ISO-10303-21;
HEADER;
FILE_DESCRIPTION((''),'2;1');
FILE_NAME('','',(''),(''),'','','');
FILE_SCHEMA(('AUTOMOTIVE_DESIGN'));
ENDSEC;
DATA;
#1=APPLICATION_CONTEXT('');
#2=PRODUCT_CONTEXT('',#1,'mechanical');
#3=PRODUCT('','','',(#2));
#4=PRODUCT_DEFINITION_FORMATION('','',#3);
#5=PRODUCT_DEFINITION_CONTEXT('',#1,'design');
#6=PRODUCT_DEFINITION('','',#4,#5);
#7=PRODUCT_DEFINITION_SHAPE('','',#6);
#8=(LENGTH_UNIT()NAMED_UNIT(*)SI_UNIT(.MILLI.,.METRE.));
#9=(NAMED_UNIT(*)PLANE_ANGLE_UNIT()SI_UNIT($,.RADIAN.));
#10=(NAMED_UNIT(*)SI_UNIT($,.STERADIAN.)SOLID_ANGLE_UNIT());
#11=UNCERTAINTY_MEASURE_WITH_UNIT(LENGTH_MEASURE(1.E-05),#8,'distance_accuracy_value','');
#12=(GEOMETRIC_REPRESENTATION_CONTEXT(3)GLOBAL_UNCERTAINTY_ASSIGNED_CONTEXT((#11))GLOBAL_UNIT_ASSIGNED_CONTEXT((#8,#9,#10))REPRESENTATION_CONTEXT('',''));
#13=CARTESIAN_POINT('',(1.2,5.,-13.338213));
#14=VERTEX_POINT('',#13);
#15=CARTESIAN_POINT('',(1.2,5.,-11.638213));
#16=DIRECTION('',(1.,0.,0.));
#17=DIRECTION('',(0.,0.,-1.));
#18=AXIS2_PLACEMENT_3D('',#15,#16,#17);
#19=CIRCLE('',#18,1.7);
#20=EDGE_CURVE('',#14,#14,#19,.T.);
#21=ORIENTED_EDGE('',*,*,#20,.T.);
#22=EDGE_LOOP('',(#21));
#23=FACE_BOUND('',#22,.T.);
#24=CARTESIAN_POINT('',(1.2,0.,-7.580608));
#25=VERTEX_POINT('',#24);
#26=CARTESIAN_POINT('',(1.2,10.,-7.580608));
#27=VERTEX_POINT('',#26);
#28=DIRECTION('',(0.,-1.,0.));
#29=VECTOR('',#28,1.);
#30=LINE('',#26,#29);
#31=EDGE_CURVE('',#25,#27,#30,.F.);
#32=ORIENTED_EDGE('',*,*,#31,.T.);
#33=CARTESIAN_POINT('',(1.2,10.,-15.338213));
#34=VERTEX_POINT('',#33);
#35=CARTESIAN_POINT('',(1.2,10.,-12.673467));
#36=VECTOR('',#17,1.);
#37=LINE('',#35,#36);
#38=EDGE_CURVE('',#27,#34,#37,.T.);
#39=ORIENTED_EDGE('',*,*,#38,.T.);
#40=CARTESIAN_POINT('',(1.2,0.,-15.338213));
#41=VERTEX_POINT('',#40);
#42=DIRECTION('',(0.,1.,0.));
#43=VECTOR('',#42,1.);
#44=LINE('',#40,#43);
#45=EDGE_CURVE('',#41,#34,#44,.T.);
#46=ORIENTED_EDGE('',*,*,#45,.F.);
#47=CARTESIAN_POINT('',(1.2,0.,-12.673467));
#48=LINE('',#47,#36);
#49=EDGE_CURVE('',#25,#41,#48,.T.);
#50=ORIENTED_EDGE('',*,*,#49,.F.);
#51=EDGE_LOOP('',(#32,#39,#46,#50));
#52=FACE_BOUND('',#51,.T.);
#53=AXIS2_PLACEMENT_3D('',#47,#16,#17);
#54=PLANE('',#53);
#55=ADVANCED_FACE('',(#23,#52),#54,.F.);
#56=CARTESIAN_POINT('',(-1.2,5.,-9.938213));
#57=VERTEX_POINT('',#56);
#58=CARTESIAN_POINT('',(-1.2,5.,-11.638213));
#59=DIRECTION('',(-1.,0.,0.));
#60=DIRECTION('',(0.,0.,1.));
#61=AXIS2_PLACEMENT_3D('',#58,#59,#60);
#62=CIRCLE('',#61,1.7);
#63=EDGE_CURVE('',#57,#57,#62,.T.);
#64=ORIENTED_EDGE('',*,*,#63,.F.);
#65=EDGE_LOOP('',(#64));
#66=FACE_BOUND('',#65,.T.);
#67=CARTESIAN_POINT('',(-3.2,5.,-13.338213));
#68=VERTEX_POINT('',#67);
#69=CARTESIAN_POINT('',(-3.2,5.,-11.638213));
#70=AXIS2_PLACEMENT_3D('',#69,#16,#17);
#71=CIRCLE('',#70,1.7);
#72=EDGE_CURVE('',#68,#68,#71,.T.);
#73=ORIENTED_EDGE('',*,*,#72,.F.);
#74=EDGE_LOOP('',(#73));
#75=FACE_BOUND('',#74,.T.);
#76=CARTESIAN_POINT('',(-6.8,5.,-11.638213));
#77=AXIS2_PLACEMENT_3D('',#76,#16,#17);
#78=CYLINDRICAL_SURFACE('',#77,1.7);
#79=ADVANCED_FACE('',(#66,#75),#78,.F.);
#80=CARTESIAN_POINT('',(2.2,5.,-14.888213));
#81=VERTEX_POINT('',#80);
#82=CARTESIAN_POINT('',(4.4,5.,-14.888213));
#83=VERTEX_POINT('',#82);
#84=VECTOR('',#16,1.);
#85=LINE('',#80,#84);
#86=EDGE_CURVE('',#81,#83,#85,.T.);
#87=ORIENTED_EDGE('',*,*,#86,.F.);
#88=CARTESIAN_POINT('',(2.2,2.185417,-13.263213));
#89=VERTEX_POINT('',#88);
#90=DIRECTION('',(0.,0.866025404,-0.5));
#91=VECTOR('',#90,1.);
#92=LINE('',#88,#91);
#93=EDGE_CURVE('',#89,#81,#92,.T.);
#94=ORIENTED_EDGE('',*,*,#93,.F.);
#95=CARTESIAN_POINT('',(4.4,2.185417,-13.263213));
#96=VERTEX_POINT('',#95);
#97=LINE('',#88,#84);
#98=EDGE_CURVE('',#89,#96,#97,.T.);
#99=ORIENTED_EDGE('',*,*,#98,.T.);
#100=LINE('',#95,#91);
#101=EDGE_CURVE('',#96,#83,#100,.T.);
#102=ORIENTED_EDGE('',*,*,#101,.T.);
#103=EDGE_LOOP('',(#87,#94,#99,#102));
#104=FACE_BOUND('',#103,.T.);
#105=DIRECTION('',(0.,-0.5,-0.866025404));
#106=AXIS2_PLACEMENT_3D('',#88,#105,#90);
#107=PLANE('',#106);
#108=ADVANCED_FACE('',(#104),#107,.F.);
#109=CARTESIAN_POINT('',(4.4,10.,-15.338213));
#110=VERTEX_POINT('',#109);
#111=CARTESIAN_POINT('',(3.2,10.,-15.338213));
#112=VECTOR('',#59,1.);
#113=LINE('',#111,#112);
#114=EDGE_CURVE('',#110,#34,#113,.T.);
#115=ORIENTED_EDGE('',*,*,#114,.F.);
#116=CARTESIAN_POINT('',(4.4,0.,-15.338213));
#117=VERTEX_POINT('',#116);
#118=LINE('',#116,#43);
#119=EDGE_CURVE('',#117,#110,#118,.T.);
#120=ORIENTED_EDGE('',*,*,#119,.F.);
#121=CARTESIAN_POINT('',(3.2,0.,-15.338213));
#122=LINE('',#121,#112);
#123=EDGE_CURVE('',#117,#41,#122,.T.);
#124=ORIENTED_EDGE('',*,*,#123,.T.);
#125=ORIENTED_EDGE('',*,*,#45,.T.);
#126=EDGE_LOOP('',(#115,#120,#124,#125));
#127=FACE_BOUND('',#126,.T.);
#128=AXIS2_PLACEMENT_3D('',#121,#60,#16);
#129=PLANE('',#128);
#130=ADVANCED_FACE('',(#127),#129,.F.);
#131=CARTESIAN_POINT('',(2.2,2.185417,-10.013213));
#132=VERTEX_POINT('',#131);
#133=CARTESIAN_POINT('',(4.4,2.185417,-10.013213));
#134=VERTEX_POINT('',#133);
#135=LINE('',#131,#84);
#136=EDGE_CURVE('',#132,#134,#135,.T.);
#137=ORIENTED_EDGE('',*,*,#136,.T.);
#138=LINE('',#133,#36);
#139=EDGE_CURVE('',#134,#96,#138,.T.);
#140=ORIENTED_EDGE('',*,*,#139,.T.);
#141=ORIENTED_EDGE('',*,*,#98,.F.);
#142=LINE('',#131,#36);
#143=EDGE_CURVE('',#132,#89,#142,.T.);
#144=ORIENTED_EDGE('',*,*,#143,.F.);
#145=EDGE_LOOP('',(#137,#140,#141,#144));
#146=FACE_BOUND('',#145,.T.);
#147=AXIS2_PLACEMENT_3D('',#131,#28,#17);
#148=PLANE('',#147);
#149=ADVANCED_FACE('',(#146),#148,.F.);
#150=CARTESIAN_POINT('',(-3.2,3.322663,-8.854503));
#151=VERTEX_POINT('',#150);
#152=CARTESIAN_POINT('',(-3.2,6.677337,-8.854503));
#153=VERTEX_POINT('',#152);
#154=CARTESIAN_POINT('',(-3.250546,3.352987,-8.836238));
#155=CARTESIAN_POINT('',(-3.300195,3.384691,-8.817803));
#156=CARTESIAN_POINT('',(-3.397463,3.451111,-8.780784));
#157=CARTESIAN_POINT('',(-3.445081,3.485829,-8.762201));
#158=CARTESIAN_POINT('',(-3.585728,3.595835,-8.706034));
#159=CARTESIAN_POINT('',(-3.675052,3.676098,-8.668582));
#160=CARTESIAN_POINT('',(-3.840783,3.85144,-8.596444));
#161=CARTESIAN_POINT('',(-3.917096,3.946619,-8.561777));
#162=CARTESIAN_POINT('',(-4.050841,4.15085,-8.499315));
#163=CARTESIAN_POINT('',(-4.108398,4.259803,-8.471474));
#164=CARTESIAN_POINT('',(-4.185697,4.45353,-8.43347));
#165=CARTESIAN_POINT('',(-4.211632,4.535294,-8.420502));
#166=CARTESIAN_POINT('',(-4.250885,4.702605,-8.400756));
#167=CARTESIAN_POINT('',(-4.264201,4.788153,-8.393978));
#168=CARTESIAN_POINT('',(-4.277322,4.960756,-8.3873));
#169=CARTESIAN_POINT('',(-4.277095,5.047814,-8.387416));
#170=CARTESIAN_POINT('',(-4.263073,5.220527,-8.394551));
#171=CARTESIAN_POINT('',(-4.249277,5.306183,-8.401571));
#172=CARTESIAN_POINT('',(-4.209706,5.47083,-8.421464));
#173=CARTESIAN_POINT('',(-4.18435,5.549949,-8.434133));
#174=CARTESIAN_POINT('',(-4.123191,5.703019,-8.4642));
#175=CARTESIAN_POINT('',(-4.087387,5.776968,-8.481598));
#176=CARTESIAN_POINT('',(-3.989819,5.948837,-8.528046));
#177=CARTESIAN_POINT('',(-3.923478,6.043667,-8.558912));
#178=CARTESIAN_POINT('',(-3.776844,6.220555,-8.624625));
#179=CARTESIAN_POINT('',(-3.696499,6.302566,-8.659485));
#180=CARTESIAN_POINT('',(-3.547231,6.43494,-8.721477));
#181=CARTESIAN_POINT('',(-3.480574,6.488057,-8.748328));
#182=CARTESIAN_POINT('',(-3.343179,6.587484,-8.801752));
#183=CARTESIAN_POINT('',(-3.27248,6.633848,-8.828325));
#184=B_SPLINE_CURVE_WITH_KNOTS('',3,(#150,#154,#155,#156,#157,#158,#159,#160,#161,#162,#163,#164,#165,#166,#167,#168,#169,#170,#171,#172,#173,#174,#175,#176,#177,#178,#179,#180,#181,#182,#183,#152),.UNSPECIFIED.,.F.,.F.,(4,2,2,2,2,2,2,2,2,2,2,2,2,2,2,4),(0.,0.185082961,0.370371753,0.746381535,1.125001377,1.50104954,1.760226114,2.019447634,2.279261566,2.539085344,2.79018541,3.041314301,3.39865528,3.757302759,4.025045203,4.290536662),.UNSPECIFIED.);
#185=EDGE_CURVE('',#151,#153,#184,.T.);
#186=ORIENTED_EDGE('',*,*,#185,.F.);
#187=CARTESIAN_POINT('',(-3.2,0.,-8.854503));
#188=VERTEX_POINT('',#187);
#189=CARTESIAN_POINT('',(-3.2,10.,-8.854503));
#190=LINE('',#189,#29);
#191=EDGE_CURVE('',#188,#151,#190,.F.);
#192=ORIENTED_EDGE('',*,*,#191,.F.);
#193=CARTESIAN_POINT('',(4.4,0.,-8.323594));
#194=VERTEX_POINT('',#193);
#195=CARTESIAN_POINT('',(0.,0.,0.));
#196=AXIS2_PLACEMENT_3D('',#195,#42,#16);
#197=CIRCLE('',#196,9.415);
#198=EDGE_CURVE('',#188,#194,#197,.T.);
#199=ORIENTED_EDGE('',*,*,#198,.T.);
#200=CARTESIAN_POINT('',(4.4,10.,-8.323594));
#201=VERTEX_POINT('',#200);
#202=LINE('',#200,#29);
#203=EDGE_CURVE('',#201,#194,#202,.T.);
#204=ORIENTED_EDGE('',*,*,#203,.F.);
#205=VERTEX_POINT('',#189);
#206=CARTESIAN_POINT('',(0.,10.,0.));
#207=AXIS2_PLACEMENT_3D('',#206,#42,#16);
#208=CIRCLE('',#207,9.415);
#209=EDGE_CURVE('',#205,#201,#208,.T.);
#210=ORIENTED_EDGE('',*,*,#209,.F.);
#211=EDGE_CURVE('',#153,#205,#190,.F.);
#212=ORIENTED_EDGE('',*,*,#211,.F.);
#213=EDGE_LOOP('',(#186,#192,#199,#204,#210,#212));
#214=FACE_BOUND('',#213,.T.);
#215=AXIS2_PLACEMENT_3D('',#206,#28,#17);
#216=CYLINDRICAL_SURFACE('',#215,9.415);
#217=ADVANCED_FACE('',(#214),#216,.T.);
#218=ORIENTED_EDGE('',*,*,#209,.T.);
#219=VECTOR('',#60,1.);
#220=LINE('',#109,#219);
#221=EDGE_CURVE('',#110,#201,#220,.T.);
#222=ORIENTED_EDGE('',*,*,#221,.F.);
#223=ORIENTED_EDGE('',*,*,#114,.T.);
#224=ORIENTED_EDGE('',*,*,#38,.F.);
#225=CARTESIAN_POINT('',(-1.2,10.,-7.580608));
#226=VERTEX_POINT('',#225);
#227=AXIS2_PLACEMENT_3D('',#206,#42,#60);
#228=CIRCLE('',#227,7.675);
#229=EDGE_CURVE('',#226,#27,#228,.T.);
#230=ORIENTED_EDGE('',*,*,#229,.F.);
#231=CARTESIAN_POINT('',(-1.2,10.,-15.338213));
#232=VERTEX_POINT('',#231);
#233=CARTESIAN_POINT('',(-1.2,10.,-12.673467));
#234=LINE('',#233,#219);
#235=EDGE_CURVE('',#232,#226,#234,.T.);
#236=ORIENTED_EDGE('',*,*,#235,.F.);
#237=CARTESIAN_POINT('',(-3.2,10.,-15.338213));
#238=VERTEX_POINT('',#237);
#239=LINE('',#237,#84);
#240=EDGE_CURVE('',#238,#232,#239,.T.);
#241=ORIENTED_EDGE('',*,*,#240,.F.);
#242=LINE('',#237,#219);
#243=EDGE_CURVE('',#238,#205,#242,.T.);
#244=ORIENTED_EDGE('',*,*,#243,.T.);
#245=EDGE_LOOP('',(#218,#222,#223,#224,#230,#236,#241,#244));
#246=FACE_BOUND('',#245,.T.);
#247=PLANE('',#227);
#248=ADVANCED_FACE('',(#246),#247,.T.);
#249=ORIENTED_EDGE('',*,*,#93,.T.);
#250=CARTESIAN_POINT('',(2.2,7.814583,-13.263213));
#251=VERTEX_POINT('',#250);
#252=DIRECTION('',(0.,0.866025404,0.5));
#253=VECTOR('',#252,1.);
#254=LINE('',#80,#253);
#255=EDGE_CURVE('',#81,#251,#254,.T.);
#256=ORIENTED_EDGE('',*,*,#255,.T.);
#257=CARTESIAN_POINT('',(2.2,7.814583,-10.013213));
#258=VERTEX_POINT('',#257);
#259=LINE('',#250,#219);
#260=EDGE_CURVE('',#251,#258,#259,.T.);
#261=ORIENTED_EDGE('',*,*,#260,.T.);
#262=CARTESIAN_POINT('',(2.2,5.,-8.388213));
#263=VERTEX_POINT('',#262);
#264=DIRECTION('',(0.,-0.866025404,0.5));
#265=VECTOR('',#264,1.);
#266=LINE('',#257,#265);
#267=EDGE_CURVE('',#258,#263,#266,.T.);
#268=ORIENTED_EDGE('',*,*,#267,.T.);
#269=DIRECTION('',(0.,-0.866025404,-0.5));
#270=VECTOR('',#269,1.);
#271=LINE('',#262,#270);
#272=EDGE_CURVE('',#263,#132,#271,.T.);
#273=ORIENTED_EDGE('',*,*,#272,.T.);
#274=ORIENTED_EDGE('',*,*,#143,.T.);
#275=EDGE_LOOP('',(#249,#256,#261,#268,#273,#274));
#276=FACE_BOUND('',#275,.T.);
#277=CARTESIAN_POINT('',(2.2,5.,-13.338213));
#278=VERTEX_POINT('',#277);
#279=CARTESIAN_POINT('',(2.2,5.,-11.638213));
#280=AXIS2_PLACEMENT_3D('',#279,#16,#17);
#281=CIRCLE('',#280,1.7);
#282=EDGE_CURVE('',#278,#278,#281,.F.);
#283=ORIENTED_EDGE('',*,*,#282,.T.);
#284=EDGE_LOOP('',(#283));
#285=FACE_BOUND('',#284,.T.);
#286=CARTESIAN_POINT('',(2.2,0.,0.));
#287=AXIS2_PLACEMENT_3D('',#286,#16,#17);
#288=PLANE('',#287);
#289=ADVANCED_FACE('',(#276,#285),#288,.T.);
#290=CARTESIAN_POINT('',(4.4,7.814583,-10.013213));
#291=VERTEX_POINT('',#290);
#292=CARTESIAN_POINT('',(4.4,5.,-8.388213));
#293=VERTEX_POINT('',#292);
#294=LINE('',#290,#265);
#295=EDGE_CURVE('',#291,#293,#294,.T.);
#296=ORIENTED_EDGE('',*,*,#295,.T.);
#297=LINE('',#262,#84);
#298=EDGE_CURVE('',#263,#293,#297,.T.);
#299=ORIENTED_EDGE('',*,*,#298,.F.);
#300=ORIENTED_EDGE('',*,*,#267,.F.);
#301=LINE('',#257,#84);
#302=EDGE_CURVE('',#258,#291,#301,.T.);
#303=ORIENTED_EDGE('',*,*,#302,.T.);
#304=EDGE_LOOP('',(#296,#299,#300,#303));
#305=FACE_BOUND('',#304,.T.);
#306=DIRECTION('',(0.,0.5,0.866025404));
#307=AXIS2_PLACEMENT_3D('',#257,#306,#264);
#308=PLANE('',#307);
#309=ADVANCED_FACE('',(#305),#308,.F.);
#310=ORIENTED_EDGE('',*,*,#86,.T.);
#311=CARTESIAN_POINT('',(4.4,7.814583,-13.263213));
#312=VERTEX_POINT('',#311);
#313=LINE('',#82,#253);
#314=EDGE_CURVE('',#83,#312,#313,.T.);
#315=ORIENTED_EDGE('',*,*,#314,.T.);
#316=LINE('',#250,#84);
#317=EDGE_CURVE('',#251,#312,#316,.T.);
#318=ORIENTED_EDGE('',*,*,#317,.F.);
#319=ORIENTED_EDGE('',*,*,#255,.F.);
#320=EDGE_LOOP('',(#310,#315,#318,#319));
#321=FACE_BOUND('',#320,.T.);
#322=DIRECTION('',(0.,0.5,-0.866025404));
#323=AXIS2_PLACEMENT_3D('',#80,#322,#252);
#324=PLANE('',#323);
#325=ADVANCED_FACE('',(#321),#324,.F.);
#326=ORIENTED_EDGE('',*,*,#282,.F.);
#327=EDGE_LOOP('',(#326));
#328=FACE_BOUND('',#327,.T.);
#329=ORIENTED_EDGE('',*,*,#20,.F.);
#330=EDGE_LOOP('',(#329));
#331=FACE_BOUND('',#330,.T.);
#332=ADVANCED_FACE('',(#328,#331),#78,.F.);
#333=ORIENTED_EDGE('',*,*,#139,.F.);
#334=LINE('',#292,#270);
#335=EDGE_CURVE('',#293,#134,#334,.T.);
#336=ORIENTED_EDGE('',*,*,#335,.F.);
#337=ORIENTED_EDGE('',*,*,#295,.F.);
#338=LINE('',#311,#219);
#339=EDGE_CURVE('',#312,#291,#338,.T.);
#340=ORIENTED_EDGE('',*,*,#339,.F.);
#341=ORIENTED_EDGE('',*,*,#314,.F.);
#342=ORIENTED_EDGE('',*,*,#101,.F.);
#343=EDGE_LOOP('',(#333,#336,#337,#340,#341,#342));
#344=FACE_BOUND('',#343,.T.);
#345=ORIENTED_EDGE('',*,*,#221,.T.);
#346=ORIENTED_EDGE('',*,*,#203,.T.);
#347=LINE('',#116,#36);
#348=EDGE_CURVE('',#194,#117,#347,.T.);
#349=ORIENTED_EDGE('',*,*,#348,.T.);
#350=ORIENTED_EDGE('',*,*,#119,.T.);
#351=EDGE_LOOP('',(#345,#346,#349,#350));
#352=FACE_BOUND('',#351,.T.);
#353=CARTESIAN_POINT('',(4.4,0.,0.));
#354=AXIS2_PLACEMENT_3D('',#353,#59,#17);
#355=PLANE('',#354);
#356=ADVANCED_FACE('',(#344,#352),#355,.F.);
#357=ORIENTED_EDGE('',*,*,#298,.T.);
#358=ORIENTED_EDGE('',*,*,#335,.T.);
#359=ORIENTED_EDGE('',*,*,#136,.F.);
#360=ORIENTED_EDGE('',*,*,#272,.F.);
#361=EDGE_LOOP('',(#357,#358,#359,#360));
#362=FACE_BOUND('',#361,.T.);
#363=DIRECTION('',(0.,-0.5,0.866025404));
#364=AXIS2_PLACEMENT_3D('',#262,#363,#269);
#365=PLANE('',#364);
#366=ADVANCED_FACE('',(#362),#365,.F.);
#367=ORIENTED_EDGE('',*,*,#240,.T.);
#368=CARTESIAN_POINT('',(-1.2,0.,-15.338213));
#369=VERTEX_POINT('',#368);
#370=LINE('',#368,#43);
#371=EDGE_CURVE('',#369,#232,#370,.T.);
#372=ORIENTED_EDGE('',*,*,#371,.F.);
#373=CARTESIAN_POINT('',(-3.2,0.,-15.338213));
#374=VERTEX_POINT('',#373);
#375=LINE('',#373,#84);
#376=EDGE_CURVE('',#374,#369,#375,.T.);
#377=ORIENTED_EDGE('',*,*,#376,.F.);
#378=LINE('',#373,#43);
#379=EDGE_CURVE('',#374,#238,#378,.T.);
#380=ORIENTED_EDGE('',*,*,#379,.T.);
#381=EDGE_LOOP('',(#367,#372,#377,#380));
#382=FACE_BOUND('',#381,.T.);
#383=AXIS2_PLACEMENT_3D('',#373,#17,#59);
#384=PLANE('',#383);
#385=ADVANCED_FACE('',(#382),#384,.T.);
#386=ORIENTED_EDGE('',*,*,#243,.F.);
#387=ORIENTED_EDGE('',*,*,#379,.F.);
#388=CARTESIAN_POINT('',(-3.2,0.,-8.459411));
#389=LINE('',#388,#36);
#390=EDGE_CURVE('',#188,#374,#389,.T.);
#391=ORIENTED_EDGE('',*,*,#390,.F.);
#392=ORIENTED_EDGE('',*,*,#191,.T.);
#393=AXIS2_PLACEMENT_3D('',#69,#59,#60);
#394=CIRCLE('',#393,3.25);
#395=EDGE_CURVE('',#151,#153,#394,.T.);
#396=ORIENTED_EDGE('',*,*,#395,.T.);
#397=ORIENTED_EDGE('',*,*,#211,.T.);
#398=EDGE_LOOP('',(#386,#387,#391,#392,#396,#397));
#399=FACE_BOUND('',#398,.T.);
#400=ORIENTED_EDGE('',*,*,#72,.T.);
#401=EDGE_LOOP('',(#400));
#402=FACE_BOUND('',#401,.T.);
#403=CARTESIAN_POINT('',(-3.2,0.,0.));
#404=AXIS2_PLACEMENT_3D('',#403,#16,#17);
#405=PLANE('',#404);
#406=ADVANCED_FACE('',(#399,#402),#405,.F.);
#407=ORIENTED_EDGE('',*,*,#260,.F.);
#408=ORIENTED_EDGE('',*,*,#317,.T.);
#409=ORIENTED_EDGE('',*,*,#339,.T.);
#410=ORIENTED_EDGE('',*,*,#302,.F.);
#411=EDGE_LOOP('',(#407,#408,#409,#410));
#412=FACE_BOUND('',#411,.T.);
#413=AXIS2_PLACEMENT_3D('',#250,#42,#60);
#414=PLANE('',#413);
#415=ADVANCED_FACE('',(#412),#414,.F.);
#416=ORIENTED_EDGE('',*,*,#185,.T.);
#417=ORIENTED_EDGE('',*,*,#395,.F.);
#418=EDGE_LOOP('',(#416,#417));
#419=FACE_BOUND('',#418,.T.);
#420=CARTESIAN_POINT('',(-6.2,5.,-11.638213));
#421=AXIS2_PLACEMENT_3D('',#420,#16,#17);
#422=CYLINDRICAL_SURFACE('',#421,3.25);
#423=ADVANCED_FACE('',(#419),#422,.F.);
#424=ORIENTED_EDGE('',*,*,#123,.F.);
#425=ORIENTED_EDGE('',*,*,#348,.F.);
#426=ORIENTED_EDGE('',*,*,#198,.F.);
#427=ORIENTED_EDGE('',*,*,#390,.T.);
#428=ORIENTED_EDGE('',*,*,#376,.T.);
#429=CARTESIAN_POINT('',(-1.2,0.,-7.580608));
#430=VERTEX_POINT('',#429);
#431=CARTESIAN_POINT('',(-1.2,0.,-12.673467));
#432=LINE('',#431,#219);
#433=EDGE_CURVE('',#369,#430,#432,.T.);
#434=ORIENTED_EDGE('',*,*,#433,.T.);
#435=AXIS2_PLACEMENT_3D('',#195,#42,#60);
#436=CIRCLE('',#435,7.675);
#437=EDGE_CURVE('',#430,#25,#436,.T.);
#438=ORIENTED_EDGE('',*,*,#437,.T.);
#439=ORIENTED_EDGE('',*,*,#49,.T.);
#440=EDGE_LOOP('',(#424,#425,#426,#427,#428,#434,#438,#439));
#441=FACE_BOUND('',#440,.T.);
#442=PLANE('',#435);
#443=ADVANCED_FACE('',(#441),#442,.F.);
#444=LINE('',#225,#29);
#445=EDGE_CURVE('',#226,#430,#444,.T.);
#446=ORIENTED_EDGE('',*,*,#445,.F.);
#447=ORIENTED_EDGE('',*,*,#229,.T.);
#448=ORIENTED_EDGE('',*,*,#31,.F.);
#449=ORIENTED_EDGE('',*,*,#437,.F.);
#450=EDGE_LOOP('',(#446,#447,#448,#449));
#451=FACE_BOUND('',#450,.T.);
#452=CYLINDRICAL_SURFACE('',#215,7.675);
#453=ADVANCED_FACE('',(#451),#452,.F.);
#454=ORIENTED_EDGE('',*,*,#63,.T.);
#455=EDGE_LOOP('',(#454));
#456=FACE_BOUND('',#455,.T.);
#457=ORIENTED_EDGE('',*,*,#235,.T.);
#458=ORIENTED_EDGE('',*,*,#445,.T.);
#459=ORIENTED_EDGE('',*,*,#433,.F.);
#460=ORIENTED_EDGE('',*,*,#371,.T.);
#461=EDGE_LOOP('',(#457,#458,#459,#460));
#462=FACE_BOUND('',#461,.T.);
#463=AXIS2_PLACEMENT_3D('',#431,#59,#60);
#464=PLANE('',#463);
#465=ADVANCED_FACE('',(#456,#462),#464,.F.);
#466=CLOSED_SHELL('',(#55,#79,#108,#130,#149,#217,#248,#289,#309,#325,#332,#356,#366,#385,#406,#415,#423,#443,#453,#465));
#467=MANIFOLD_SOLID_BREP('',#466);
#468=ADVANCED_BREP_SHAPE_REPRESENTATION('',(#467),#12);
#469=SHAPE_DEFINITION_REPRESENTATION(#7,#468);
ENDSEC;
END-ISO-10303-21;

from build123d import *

# Parameters (mm, degrees)
SKETCH1_R            = 9.415
SKETCH1_R_2          = 7.675
EXTRUDE_THIN1_DEPTH  = 10
SKETCH2_W            = 2.4
SKETCH2_H            = 11.262029822
CUT_EXTRUDE1_DEPTH   = 10
BOSS_EXTRUDE1_DEPTH  = 2
SKETCH5_R            = 1.7
CUT_EXTRUDE2_DEPTH   = 10
MOVE_START           = 3.2
MOVE_FACE1_OUTLINE_W = 10
MOVE_FACE1_OUTLINE_H = 8.338213159
MOVE_FACE1_OUTLINE_R = 1.7
MOVE_FACE1_DEPTH     = 1.2
CUT_EXTRUDE3_DEPTH   = 2.2
SKETCH8_R            = 3.25
CUT_EXTRUDE4_DEPTH   = 3


# Read off the part's stored shape, not the designer's step: Move Face1
with BuildPart() as part:
    # Sketch1 → Extrude-Thin1 (new body)
    with BuildSketch(Plane(origin=(0, 0, 0), x_dir=(1, 0, 0), z_dir=(0, 1, 0))):
        Circle(SKETCH1_R)
        Circle(SKETCH1_R_2, mode=Mode.SUBTRACT)
    extrude(amount=EXTRUDE_THIN1_DEPTH)

    # Sketch2 → Cut-Extrude1 (cut)
    with BuildSketch(Plane(origin=(0, 10, 0), x_dir=(1, 0, 0), z_dir=(0, 1, 0))):
        with Locations((0, 7.042452335)):
            Rectangle(SKETCH2_W, SKETCH2_H)
    extrude(amount=-CUT_EXTRUDE1_DEPTH, mode=Mode.SUBTRACT)

    # Sketch4 → Boss-Extrude1 (add)
    with BuildSketch(Plane(origin=(-1.2, 0, 0), x_dir=(0, 0, -1), z_dir=(1, 0, 0))):
        Polygon((9.338213159, 10), (8.459410822, 10), (8.459410822, 0), (9.338213159, 0), (15.338213159, 0), (15.338213159, 10), align=None)
    boss_extrude1 = extrude(amount=-BOSS_EXTRUDE1_DEPTH)

    # Mirror1: Boss-Extrude1 across plane
    add(boss_extrude1.mirror(Plane(origin=(0, 0, 0), x_dir=(0, 0, 1), z_dir=(1, 0, 0))))

    # Sketch5 → Cut-Extrude2 (cut)
    with BuildSketch(Plane(origin=(3.2, 0, 0), x_dir=(0, 0, -1), z_dir=(1, 0, 0))):
        with Locations((11.638213159, 5)):
            Circle(SKETCH5_R)
    extrude(amount=-CUT_EXTRUDE2_DEPTH, mode=Mode.SUBTRACT)

    # Move Face1 outline → Move Face1 (add)
    with BuildSketch(Plane.YZ.offset(MOVE_START)):
        with Locations((5, -11.169106579)):
            Rectangle(MOVE_FACE1_OUTLINE_W, MOVE_FACE1_OUTLINE_H)
        with Locations((5, -11.638213159)):
            Circle(MOVE_FACE1_OUTLINE_R, mode=Mode.SUBTRACT)
    extrude(amount=MOVE_FACE1_DEPTH)

    # Sketch7 → Cut-Extrude3 (cut)
    with BuildSketch(Plane(origin=(4.4, 0, 0), x_dir=(0, 0, -1), z_dir=(1, 0, 0))):
        Polygon((14.888213159, 5), (13.263213159, 7.814582562), (10.013213159, 7.814582562), (8.388213159, 5), (10.013213159, 2.185417438), (13.263213159, 2.185417438), align=None)
    extrude(amount=-CUT_EXTRUDE3_DEPTH, mode=Mode.SUBTRACT)

    # Sketch8 → Cut-Extrude4 (cut)
    with BuildSketch(Plane.ZY.offset(3.2)):
        with Locations((-11.638213159, 5)):
            Circle(SKETCH8_R)
    extrude(amount=CUT_EXTRUDE4_DEPTH, mode=Mode.SUBTRACT)


solid = part.part
